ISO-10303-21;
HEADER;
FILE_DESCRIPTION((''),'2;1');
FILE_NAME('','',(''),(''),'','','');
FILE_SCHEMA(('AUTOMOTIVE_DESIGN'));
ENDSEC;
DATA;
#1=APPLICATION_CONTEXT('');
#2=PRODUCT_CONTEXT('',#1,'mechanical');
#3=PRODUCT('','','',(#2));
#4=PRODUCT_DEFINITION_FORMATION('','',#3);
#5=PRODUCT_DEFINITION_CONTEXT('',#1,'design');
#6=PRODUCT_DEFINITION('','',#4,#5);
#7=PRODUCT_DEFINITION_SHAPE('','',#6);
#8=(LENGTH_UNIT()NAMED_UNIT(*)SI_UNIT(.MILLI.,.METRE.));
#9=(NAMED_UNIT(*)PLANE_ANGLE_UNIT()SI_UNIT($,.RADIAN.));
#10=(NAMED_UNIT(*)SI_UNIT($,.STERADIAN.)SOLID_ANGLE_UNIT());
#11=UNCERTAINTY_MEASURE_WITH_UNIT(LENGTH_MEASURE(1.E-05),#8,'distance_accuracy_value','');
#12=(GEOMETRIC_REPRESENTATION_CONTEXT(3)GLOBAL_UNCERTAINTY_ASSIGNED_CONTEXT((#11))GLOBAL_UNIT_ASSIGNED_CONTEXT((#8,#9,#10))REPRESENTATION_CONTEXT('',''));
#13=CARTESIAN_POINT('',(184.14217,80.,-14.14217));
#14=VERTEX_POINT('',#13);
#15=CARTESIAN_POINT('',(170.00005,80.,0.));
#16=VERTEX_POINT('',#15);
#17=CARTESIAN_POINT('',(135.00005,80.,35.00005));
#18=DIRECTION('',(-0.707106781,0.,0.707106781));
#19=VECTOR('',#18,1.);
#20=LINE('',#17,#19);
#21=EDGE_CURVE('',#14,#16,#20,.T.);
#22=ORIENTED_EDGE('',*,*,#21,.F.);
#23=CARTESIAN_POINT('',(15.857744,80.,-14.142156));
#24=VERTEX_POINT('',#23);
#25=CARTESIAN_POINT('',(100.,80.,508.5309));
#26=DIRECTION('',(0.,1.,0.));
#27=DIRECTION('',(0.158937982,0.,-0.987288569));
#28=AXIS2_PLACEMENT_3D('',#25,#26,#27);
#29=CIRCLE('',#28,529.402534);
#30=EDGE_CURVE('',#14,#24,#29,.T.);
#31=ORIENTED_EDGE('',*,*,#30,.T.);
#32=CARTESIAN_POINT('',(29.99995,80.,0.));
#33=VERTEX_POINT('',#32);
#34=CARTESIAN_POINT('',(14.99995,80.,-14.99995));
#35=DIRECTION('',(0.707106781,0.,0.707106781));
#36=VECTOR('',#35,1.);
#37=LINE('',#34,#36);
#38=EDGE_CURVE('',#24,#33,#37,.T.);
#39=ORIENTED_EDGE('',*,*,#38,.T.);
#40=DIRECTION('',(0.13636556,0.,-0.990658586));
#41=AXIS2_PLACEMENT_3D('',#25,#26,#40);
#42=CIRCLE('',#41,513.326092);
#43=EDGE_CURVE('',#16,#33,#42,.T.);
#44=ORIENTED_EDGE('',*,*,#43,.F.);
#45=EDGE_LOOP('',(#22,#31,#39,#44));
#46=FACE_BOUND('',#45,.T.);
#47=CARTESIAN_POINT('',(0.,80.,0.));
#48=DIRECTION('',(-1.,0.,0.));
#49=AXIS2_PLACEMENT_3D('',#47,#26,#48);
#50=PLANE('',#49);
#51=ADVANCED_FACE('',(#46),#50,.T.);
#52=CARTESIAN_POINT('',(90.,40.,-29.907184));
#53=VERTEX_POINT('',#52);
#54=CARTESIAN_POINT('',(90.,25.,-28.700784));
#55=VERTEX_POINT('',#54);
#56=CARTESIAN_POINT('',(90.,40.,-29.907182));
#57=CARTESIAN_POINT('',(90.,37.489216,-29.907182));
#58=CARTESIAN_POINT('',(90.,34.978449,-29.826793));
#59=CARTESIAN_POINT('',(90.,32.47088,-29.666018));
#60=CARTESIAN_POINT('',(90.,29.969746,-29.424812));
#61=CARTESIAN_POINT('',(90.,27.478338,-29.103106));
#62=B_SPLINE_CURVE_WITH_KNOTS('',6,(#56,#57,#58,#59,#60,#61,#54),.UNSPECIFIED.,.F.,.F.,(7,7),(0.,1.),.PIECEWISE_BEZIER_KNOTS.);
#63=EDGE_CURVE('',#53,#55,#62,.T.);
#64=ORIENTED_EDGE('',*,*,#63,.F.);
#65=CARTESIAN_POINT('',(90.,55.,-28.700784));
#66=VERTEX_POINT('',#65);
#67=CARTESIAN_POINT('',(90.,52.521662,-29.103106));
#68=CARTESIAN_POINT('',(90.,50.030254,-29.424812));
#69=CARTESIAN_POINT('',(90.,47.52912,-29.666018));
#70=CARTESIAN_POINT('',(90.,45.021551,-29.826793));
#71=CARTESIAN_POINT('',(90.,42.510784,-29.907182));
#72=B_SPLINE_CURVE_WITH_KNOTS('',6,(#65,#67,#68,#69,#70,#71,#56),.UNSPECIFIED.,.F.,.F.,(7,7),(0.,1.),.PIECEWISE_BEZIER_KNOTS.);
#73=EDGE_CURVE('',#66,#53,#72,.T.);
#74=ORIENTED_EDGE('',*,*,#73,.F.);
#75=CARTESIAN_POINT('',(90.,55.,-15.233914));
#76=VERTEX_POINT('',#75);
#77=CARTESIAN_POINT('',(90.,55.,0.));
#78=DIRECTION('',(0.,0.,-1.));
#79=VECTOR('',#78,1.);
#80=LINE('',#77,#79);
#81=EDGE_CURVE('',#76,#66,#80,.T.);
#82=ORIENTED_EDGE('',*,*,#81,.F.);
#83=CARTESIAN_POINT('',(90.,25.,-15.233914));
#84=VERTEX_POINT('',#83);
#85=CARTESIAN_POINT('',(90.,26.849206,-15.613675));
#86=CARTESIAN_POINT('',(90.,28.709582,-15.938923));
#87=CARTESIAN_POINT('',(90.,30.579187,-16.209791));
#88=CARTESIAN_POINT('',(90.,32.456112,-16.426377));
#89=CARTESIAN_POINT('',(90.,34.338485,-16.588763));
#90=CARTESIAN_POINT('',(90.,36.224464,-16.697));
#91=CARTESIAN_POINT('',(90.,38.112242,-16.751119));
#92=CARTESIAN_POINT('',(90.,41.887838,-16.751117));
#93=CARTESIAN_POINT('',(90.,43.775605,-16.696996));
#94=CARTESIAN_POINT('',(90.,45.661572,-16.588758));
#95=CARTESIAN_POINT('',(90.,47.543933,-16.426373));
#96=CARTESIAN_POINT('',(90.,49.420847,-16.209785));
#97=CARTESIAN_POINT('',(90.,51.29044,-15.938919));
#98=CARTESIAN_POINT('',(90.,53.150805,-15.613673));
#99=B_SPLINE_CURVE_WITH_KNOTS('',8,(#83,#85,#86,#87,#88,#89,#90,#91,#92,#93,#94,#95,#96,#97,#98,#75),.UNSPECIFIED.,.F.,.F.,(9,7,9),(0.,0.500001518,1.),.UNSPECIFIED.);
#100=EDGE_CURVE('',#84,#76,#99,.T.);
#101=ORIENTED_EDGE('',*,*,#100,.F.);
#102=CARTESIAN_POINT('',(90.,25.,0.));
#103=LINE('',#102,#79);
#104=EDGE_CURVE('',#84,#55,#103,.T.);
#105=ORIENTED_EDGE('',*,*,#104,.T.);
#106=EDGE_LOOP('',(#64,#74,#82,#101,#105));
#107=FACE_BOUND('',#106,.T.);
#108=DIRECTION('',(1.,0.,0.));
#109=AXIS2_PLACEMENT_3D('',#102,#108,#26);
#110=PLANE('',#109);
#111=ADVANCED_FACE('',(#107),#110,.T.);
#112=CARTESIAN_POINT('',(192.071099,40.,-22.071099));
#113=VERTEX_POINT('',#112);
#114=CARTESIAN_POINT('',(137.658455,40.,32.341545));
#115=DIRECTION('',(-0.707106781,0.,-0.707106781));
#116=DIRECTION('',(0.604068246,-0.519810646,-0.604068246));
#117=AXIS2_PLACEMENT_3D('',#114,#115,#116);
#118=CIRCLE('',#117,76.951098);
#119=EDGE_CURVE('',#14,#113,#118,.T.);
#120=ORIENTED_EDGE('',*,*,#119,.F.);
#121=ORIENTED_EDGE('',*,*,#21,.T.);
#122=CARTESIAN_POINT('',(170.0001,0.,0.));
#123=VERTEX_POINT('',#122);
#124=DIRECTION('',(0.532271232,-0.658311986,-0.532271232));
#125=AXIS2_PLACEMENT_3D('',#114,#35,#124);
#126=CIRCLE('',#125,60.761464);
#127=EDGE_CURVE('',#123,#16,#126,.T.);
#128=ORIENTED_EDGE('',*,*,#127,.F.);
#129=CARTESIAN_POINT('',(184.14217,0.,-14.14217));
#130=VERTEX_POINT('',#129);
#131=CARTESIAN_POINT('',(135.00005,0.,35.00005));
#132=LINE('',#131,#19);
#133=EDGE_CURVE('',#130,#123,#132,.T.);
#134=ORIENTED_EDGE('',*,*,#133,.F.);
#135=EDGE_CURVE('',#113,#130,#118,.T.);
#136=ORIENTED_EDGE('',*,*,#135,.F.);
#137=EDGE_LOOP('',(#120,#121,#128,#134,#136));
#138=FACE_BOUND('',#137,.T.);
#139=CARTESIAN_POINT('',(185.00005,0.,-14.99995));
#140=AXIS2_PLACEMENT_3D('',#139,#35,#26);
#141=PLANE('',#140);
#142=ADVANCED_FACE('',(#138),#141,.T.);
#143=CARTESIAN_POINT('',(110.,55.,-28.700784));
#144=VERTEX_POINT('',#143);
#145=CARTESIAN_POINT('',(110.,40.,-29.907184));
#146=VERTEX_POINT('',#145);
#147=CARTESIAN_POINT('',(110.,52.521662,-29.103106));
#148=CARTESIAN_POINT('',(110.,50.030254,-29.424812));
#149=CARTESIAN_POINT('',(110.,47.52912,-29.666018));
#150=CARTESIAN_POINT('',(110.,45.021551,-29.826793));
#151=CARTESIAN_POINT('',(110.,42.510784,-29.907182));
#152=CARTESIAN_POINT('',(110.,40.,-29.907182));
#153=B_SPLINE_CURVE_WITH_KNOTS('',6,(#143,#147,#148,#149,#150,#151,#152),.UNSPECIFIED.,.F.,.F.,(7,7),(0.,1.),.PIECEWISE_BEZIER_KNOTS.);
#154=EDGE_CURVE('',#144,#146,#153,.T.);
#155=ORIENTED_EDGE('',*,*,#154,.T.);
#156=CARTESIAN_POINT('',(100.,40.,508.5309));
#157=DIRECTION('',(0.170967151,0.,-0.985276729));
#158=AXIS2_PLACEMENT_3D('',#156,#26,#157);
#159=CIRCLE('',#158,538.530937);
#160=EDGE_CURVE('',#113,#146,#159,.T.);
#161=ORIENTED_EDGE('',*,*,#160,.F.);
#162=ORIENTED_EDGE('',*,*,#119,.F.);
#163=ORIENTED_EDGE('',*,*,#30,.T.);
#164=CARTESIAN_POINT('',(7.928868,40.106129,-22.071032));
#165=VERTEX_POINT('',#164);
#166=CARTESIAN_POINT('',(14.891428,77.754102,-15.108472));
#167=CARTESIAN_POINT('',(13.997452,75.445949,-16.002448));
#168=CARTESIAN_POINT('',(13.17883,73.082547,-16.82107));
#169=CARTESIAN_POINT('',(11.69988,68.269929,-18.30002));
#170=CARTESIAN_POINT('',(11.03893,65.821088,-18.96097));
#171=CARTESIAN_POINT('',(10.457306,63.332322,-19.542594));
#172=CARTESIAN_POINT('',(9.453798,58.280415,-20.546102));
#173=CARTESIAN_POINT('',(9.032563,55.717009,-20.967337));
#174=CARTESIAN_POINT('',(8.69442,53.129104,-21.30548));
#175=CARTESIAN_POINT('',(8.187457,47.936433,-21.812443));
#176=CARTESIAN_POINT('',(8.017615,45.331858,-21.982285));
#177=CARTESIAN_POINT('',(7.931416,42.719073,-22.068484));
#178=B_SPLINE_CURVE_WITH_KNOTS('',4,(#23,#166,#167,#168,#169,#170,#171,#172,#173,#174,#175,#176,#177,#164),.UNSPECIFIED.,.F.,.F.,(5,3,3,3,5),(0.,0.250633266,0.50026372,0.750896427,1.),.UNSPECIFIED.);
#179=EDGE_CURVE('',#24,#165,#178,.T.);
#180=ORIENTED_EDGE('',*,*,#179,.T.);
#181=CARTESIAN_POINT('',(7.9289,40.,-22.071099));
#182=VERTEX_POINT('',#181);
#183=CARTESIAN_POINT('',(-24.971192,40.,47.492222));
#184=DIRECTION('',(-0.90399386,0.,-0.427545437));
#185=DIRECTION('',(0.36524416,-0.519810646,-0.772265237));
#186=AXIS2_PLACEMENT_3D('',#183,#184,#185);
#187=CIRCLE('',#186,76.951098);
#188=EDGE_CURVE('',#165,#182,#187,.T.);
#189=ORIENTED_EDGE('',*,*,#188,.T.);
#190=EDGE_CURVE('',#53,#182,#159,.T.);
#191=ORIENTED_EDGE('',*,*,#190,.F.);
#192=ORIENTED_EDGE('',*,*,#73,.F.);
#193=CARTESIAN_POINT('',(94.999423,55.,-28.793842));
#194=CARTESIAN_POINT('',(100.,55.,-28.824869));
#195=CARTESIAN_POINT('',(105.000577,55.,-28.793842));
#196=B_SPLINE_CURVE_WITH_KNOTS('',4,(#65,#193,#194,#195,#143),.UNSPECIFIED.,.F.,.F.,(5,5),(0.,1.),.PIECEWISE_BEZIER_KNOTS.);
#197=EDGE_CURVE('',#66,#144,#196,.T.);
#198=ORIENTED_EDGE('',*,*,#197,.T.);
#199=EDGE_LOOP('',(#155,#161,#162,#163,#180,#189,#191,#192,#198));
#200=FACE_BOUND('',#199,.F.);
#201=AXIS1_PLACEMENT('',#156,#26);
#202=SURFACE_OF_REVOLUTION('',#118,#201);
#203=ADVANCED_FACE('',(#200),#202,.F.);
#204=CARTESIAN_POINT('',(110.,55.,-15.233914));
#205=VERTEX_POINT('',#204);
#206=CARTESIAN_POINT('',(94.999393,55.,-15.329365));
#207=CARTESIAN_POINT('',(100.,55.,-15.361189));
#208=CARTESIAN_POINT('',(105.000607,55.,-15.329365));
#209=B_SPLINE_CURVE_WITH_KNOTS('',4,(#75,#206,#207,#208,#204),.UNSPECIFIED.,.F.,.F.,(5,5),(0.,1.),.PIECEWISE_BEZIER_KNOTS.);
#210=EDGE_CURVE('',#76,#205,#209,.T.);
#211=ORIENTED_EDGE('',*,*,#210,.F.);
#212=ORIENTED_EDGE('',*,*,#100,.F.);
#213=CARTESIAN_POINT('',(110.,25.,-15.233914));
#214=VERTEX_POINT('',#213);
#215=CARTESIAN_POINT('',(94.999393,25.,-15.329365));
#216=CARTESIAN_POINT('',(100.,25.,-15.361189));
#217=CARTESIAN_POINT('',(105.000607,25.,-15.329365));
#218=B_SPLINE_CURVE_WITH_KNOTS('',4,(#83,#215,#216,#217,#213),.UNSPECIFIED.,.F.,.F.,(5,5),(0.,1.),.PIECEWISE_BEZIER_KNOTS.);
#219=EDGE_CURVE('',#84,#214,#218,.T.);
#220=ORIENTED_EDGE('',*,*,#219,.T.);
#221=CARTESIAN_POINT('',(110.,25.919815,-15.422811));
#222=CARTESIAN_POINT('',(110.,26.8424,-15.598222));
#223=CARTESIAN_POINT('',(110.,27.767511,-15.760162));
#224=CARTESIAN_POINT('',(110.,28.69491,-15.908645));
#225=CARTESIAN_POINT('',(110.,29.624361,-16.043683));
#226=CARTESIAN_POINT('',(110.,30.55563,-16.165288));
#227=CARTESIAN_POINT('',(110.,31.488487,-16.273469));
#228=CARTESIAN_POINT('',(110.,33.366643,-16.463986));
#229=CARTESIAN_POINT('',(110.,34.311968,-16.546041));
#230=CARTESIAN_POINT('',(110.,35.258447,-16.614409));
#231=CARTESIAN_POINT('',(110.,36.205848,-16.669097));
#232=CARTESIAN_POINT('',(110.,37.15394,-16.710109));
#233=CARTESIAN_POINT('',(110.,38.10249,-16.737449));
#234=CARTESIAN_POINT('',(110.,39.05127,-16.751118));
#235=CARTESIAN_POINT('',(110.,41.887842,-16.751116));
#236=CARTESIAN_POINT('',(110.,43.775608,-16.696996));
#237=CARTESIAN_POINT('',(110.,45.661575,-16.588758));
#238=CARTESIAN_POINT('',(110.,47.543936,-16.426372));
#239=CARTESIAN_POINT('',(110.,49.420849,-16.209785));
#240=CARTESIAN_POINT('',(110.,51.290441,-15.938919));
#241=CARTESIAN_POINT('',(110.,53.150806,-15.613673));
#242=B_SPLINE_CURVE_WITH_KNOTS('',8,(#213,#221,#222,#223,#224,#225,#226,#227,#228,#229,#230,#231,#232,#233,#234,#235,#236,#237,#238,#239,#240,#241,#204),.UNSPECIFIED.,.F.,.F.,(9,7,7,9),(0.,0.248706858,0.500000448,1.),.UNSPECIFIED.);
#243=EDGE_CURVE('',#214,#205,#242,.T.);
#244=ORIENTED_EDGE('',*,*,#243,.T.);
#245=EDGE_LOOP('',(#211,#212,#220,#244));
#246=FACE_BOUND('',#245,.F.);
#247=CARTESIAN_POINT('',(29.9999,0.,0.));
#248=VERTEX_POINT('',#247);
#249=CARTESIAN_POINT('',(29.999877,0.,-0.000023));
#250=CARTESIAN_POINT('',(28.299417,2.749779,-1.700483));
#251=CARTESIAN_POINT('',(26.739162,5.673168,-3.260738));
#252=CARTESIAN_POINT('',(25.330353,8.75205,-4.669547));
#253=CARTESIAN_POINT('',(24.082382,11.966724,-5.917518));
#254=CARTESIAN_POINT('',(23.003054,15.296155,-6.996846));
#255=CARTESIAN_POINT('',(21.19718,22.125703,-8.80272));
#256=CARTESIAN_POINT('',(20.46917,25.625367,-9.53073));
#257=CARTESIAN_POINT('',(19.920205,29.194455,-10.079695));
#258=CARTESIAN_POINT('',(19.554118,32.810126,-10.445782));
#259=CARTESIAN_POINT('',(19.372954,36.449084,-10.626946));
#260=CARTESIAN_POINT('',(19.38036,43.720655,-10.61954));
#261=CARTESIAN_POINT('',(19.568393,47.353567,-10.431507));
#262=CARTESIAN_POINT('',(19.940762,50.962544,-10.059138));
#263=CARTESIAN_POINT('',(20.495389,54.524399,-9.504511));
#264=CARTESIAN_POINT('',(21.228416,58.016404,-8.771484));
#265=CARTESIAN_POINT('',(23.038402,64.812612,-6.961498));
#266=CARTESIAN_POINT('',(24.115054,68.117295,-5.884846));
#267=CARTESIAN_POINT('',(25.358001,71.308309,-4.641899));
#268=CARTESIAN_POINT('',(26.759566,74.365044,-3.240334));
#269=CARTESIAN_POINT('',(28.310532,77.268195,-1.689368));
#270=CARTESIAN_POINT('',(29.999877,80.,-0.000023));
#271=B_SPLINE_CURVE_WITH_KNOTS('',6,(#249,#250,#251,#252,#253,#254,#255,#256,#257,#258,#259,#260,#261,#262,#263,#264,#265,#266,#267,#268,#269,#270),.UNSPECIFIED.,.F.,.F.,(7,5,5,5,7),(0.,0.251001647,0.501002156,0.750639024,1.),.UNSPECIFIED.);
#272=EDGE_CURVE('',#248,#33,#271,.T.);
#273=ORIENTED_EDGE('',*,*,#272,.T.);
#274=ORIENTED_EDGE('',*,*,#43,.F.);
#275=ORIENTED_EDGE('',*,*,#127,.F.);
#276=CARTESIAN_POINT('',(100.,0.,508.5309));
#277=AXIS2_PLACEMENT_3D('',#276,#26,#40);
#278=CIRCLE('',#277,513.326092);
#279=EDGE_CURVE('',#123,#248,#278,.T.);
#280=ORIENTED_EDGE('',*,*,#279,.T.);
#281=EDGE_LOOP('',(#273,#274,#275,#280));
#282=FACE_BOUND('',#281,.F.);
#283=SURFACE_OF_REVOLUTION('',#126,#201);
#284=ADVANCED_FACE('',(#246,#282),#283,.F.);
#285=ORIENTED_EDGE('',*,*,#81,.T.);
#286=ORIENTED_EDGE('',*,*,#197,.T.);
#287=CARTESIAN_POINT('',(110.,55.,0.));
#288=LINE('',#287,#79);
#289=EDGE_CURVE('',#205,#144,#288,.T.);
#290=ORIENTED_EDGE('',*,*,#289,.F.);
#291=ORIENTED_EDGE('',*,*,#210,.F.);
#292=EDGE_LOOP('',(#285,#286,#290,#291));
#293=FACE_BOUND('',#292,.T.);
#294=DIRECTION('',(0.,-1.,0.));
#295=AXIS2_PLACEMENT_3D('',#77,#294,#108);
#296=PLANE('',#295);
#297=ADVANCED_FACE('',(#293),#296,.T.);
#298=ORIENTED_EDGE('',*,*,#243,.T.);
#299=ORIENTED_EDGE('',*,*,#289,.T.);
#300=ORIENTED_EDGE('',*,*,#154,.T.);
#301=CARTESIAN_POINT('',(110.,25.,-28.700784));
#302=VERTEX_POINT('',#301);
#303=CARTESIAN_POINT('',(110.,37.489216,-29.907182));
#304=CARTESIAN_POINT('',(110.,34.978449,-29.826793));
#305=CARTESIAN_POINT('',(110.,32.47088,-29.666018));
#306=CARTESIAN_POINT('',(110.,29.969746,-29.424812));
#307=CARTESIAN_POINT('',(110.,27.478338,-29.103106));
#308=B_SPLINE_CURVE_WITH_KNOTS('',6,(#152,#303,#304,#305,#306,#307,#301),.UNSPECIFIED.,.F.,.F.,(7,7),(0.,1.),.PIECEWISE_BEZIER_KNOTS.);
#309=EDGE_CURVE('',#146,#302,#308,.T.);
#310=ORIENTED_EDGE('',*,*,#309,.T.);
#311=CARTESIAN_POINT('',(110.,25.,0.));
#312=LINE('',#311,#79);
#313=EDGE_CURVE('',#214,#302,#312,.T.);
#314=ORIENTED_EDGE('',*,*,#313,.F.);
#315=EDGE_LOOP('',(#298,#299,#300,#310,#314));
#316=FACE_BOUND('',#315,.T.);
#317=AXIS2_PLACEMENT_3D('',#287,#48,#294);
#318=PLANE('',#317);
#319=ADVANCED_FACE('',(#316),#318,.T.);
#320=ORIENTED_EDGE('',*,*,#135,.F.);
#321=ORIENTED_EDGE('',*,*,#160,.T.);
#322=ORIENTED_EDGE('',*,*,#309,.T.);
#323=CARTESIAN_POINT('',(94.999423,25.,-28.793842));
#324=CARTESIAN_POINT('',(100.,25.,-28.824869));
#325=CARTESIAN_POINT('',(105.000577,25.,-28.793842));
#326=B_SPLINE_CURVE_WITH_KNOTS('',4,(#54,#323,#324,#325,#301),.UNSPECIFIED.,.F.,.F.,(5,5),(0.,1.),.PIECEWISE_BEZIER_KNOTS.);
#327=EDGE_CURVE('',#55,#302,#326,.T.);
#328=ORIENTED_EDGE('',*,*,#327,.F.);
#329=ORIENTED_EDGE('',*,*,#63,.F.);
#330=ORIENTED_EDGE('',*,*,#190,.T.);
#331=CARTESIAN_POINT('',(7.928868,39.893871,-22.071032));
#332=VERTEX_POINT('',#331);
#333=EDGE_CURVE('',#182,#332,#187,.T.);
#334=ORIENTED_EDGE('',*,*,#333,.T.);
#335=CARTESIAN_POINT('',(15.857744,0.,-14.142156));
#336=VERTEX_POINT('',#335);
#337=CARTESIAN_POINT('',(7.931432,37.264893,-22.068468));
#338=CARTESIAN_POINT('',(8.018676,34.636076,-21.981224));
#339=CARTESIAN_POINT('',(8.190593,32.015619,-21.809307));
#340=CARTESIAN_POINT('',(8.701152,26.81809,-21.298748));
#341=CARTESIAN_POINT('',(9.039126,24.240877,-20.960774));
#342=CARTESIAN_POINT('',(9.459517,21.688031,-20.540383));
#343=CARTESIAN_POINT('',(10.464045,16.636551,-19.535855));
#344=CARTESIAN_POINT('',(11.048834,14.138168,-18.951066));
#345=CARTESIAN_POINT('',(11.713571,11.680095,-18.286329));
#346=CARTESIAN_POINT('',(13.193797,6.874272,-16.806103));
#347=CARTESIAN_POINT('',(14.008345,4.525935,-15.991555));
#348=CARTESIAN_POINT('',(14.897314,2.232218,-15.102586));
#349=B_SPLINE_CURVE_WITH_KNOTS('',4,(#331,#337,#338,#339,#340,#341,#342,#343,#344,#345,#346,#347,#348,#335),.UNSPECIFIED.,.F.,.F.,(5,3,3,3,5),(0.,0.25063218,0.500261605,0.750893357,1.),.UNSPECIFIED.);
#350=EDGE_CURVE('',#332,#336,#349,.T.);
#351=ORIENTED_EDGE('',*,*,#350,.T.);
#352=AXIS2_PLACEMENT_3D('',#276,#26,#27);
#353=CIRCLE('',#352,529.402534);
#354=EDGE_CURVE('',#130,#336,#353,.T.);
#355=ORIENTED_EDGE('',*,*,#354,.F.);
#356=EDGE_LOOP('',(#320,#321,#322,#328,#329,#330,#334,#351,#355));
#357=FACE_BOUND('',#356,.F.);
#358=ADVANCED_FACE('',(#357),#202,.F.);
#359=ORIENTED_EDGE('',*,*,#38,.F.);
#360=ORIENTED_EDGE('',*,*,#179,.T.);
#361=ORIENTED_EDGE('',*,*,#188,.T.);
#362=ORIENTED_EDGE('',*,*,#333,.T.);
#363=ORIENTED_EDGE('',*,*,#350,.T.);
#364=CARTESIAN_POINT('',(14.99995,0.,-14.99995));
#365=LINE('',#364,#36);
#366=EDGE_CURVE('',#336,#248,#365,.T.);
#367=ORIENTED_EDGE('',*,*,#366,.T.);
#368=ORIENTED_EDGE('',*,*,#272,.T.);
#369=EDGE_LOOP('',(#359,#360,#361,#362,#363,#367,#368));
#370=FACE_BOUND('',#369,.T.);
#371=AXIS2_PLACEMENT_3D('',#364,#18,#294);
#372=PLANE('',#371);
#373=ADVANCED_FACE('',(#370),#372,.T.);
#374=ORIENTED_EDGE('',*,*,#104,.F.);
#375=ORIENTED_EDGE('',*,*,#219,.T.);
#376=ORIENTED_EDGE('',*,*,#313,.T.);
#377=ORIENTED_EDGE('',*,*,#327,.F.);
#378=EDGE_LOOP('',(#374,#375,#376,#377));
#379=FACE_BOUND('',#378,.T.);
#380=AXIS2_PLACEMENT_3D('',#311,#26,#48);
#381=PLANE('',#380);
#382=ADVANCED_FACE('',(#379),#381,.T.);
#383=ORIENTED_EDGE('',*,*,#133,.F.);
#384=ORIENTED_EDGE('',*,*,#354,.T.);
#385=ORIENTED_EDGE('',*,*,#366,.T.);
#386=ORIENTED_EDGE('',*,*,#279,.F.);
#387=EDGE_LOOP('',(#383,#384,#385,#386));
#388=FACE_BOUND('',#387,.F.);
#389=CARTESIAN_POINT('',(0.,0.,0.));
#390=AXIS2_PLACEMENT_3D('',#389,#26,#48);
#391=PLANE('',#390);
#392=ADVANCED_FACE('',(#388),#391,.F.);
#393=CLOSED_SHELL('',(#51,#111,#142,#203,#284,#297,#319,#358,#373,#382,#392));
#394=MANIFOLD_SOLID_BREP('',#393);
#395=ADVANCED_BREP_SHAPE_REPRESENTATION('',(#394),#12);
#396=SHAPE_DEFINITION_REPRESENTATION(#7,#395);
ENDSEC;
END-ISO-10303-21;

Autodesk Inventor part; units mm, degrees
ref_plane "YZ Plane" through (0, 0, 0) normal (1, 0, 0) x (0, 1, 0)
ref_plane "XZ Plane" through (0, 0, 0) normal (0, 1, 0) x (-1, 0, 0)
ref_plane "XY Plane" through (0, 0, 0) normal (0, 0, 1) x (1, 0, 0)
sketch "Эскиз1" plane through (0, 0, 0) normal (0, 1, 0) x (-1, 0, 0)
  line L0 (0, 0) -> (-200, 0)
  line L1 (-200, 0) -> (-200, -30)
  line L2 (-200, -30) -> (0, -30)
  line L3 (0, -30) -> (0, 0)
  dimension "d0" = 200
  dimension "d1" = 30
extrude "Выдавливание1" add sketch "Эскиз1" along normal blind 80
chamfer "Фаска1" distance 30 angle 45 2 edges at (0, 40, 0) (200, 40, 0)
sketch "Эскиз2" plane through (30, 0, 0) normal (0, 0, 1) x (1, 0, 0)
  line L0 (60, 55) -> (80, 55)
  line L1 (80, 55) -> (80, 25)
  line L2 (80, 25) -> (60, 25)
  line L3 (60, 25) -> (60, 55)
  line L4 (0, 0) -> (0, 80) projected
  line L5 (0, 80) -> (140, 80) projected
  point P0 (-30, 0)
  point P1 (60, 40)
  point P2 (0, 40)
  point P3 (70, 55)
  point P4 (70, 80)
  dimension "d7" = 20
  dimension "d8" = 30
extrude "Выдавливание2" cut sketch "Эскиз2" against normal through all
sketch "Эскиз3" plane through (0, 80, 0) normal (0, 1, 0) x (1, 0, 0)
  line L0 (200, 30) -> (170, 0) projected
  line L1 (200, 30) -> (0, 30) projected
  line L2 (30, 0) -> (0, 30) projected
  line L3 (30, 0) -> (170, 0) projected
  line L4 (30, 0) -> (0, 30) projected
  line L5 (15, 15) -> (7.9289, 22.0711)
  arc A0 (192.0711, 22.0711) -> (7.9289, 22.0711) centre (100, -508.5309) ccw
  line L6 (200, 30) -> (0, 30) projected
  line L7 (30, 0) -> (170, 0) projected
  arc A1 (170, 0) -> (30, 0) centre (100, -508.5309) ccw
  point P0 (0, 0)
  point P1 (100, 0)
  point P2 (100, 0)
  dimension "d11" = 10
extrude "Выдавливание3" cut sketch "Эскиз3" against normal through all contours L0 A0 L1 | A0 L2 L1 | L3 A1
sketch "Эскиз4" plane through (192.0711, 0, -22.0711) normal (0.7071068, 0, 0.7071068) x (0.7071068, 0, -0.7071068)
  line L0 (0, 0) -> (0, 80) projected
  line L1 (0, 80) -> (-31.2132, 80) projected
  line L2 (-31.2132, 80) -> (-31.2132, 0) projected
  line L3 (-31.2132, 0) -> (0, 0) projected
  line L4 (0, 80) -> (-130.2082, 80) projected
  arc A0 (-11.2132, 0) -> (-11.2132, 80) centre (-76.9511, 40) ccw
  arc A1 (-31.2132, 0) -> (-31.2132, 80) centre (-76.9511, 40) ccw
  line L5 (-31.2132, 0) -> (0, 0) projected
  line L6 (0, 0) -> (0, 80) projected
  line L7 (-31.2132, 80) -> (-11.2132, 80)
  line L8 (-31.2132, 0) -> (-11.2132, 0)
  point P0 (-151.4214, 0)
  point P1 (-31.2132, 40)
  dimension "d14" = 20
sketch3d "3D эскиз1"
  arc A0 (192.0711, 80, -22.0711) -> (7.9289, 80, -22.0711) centre (100, 80, 508.5309) ccw
sweep "Сдвиг1" cut profiles "Эскиз4" path "3D эскиз1" contours L3 A0 L0 | A0 L1 L0 | L2 A1
properties part number "dou_short_square" material "Красное дерево"
